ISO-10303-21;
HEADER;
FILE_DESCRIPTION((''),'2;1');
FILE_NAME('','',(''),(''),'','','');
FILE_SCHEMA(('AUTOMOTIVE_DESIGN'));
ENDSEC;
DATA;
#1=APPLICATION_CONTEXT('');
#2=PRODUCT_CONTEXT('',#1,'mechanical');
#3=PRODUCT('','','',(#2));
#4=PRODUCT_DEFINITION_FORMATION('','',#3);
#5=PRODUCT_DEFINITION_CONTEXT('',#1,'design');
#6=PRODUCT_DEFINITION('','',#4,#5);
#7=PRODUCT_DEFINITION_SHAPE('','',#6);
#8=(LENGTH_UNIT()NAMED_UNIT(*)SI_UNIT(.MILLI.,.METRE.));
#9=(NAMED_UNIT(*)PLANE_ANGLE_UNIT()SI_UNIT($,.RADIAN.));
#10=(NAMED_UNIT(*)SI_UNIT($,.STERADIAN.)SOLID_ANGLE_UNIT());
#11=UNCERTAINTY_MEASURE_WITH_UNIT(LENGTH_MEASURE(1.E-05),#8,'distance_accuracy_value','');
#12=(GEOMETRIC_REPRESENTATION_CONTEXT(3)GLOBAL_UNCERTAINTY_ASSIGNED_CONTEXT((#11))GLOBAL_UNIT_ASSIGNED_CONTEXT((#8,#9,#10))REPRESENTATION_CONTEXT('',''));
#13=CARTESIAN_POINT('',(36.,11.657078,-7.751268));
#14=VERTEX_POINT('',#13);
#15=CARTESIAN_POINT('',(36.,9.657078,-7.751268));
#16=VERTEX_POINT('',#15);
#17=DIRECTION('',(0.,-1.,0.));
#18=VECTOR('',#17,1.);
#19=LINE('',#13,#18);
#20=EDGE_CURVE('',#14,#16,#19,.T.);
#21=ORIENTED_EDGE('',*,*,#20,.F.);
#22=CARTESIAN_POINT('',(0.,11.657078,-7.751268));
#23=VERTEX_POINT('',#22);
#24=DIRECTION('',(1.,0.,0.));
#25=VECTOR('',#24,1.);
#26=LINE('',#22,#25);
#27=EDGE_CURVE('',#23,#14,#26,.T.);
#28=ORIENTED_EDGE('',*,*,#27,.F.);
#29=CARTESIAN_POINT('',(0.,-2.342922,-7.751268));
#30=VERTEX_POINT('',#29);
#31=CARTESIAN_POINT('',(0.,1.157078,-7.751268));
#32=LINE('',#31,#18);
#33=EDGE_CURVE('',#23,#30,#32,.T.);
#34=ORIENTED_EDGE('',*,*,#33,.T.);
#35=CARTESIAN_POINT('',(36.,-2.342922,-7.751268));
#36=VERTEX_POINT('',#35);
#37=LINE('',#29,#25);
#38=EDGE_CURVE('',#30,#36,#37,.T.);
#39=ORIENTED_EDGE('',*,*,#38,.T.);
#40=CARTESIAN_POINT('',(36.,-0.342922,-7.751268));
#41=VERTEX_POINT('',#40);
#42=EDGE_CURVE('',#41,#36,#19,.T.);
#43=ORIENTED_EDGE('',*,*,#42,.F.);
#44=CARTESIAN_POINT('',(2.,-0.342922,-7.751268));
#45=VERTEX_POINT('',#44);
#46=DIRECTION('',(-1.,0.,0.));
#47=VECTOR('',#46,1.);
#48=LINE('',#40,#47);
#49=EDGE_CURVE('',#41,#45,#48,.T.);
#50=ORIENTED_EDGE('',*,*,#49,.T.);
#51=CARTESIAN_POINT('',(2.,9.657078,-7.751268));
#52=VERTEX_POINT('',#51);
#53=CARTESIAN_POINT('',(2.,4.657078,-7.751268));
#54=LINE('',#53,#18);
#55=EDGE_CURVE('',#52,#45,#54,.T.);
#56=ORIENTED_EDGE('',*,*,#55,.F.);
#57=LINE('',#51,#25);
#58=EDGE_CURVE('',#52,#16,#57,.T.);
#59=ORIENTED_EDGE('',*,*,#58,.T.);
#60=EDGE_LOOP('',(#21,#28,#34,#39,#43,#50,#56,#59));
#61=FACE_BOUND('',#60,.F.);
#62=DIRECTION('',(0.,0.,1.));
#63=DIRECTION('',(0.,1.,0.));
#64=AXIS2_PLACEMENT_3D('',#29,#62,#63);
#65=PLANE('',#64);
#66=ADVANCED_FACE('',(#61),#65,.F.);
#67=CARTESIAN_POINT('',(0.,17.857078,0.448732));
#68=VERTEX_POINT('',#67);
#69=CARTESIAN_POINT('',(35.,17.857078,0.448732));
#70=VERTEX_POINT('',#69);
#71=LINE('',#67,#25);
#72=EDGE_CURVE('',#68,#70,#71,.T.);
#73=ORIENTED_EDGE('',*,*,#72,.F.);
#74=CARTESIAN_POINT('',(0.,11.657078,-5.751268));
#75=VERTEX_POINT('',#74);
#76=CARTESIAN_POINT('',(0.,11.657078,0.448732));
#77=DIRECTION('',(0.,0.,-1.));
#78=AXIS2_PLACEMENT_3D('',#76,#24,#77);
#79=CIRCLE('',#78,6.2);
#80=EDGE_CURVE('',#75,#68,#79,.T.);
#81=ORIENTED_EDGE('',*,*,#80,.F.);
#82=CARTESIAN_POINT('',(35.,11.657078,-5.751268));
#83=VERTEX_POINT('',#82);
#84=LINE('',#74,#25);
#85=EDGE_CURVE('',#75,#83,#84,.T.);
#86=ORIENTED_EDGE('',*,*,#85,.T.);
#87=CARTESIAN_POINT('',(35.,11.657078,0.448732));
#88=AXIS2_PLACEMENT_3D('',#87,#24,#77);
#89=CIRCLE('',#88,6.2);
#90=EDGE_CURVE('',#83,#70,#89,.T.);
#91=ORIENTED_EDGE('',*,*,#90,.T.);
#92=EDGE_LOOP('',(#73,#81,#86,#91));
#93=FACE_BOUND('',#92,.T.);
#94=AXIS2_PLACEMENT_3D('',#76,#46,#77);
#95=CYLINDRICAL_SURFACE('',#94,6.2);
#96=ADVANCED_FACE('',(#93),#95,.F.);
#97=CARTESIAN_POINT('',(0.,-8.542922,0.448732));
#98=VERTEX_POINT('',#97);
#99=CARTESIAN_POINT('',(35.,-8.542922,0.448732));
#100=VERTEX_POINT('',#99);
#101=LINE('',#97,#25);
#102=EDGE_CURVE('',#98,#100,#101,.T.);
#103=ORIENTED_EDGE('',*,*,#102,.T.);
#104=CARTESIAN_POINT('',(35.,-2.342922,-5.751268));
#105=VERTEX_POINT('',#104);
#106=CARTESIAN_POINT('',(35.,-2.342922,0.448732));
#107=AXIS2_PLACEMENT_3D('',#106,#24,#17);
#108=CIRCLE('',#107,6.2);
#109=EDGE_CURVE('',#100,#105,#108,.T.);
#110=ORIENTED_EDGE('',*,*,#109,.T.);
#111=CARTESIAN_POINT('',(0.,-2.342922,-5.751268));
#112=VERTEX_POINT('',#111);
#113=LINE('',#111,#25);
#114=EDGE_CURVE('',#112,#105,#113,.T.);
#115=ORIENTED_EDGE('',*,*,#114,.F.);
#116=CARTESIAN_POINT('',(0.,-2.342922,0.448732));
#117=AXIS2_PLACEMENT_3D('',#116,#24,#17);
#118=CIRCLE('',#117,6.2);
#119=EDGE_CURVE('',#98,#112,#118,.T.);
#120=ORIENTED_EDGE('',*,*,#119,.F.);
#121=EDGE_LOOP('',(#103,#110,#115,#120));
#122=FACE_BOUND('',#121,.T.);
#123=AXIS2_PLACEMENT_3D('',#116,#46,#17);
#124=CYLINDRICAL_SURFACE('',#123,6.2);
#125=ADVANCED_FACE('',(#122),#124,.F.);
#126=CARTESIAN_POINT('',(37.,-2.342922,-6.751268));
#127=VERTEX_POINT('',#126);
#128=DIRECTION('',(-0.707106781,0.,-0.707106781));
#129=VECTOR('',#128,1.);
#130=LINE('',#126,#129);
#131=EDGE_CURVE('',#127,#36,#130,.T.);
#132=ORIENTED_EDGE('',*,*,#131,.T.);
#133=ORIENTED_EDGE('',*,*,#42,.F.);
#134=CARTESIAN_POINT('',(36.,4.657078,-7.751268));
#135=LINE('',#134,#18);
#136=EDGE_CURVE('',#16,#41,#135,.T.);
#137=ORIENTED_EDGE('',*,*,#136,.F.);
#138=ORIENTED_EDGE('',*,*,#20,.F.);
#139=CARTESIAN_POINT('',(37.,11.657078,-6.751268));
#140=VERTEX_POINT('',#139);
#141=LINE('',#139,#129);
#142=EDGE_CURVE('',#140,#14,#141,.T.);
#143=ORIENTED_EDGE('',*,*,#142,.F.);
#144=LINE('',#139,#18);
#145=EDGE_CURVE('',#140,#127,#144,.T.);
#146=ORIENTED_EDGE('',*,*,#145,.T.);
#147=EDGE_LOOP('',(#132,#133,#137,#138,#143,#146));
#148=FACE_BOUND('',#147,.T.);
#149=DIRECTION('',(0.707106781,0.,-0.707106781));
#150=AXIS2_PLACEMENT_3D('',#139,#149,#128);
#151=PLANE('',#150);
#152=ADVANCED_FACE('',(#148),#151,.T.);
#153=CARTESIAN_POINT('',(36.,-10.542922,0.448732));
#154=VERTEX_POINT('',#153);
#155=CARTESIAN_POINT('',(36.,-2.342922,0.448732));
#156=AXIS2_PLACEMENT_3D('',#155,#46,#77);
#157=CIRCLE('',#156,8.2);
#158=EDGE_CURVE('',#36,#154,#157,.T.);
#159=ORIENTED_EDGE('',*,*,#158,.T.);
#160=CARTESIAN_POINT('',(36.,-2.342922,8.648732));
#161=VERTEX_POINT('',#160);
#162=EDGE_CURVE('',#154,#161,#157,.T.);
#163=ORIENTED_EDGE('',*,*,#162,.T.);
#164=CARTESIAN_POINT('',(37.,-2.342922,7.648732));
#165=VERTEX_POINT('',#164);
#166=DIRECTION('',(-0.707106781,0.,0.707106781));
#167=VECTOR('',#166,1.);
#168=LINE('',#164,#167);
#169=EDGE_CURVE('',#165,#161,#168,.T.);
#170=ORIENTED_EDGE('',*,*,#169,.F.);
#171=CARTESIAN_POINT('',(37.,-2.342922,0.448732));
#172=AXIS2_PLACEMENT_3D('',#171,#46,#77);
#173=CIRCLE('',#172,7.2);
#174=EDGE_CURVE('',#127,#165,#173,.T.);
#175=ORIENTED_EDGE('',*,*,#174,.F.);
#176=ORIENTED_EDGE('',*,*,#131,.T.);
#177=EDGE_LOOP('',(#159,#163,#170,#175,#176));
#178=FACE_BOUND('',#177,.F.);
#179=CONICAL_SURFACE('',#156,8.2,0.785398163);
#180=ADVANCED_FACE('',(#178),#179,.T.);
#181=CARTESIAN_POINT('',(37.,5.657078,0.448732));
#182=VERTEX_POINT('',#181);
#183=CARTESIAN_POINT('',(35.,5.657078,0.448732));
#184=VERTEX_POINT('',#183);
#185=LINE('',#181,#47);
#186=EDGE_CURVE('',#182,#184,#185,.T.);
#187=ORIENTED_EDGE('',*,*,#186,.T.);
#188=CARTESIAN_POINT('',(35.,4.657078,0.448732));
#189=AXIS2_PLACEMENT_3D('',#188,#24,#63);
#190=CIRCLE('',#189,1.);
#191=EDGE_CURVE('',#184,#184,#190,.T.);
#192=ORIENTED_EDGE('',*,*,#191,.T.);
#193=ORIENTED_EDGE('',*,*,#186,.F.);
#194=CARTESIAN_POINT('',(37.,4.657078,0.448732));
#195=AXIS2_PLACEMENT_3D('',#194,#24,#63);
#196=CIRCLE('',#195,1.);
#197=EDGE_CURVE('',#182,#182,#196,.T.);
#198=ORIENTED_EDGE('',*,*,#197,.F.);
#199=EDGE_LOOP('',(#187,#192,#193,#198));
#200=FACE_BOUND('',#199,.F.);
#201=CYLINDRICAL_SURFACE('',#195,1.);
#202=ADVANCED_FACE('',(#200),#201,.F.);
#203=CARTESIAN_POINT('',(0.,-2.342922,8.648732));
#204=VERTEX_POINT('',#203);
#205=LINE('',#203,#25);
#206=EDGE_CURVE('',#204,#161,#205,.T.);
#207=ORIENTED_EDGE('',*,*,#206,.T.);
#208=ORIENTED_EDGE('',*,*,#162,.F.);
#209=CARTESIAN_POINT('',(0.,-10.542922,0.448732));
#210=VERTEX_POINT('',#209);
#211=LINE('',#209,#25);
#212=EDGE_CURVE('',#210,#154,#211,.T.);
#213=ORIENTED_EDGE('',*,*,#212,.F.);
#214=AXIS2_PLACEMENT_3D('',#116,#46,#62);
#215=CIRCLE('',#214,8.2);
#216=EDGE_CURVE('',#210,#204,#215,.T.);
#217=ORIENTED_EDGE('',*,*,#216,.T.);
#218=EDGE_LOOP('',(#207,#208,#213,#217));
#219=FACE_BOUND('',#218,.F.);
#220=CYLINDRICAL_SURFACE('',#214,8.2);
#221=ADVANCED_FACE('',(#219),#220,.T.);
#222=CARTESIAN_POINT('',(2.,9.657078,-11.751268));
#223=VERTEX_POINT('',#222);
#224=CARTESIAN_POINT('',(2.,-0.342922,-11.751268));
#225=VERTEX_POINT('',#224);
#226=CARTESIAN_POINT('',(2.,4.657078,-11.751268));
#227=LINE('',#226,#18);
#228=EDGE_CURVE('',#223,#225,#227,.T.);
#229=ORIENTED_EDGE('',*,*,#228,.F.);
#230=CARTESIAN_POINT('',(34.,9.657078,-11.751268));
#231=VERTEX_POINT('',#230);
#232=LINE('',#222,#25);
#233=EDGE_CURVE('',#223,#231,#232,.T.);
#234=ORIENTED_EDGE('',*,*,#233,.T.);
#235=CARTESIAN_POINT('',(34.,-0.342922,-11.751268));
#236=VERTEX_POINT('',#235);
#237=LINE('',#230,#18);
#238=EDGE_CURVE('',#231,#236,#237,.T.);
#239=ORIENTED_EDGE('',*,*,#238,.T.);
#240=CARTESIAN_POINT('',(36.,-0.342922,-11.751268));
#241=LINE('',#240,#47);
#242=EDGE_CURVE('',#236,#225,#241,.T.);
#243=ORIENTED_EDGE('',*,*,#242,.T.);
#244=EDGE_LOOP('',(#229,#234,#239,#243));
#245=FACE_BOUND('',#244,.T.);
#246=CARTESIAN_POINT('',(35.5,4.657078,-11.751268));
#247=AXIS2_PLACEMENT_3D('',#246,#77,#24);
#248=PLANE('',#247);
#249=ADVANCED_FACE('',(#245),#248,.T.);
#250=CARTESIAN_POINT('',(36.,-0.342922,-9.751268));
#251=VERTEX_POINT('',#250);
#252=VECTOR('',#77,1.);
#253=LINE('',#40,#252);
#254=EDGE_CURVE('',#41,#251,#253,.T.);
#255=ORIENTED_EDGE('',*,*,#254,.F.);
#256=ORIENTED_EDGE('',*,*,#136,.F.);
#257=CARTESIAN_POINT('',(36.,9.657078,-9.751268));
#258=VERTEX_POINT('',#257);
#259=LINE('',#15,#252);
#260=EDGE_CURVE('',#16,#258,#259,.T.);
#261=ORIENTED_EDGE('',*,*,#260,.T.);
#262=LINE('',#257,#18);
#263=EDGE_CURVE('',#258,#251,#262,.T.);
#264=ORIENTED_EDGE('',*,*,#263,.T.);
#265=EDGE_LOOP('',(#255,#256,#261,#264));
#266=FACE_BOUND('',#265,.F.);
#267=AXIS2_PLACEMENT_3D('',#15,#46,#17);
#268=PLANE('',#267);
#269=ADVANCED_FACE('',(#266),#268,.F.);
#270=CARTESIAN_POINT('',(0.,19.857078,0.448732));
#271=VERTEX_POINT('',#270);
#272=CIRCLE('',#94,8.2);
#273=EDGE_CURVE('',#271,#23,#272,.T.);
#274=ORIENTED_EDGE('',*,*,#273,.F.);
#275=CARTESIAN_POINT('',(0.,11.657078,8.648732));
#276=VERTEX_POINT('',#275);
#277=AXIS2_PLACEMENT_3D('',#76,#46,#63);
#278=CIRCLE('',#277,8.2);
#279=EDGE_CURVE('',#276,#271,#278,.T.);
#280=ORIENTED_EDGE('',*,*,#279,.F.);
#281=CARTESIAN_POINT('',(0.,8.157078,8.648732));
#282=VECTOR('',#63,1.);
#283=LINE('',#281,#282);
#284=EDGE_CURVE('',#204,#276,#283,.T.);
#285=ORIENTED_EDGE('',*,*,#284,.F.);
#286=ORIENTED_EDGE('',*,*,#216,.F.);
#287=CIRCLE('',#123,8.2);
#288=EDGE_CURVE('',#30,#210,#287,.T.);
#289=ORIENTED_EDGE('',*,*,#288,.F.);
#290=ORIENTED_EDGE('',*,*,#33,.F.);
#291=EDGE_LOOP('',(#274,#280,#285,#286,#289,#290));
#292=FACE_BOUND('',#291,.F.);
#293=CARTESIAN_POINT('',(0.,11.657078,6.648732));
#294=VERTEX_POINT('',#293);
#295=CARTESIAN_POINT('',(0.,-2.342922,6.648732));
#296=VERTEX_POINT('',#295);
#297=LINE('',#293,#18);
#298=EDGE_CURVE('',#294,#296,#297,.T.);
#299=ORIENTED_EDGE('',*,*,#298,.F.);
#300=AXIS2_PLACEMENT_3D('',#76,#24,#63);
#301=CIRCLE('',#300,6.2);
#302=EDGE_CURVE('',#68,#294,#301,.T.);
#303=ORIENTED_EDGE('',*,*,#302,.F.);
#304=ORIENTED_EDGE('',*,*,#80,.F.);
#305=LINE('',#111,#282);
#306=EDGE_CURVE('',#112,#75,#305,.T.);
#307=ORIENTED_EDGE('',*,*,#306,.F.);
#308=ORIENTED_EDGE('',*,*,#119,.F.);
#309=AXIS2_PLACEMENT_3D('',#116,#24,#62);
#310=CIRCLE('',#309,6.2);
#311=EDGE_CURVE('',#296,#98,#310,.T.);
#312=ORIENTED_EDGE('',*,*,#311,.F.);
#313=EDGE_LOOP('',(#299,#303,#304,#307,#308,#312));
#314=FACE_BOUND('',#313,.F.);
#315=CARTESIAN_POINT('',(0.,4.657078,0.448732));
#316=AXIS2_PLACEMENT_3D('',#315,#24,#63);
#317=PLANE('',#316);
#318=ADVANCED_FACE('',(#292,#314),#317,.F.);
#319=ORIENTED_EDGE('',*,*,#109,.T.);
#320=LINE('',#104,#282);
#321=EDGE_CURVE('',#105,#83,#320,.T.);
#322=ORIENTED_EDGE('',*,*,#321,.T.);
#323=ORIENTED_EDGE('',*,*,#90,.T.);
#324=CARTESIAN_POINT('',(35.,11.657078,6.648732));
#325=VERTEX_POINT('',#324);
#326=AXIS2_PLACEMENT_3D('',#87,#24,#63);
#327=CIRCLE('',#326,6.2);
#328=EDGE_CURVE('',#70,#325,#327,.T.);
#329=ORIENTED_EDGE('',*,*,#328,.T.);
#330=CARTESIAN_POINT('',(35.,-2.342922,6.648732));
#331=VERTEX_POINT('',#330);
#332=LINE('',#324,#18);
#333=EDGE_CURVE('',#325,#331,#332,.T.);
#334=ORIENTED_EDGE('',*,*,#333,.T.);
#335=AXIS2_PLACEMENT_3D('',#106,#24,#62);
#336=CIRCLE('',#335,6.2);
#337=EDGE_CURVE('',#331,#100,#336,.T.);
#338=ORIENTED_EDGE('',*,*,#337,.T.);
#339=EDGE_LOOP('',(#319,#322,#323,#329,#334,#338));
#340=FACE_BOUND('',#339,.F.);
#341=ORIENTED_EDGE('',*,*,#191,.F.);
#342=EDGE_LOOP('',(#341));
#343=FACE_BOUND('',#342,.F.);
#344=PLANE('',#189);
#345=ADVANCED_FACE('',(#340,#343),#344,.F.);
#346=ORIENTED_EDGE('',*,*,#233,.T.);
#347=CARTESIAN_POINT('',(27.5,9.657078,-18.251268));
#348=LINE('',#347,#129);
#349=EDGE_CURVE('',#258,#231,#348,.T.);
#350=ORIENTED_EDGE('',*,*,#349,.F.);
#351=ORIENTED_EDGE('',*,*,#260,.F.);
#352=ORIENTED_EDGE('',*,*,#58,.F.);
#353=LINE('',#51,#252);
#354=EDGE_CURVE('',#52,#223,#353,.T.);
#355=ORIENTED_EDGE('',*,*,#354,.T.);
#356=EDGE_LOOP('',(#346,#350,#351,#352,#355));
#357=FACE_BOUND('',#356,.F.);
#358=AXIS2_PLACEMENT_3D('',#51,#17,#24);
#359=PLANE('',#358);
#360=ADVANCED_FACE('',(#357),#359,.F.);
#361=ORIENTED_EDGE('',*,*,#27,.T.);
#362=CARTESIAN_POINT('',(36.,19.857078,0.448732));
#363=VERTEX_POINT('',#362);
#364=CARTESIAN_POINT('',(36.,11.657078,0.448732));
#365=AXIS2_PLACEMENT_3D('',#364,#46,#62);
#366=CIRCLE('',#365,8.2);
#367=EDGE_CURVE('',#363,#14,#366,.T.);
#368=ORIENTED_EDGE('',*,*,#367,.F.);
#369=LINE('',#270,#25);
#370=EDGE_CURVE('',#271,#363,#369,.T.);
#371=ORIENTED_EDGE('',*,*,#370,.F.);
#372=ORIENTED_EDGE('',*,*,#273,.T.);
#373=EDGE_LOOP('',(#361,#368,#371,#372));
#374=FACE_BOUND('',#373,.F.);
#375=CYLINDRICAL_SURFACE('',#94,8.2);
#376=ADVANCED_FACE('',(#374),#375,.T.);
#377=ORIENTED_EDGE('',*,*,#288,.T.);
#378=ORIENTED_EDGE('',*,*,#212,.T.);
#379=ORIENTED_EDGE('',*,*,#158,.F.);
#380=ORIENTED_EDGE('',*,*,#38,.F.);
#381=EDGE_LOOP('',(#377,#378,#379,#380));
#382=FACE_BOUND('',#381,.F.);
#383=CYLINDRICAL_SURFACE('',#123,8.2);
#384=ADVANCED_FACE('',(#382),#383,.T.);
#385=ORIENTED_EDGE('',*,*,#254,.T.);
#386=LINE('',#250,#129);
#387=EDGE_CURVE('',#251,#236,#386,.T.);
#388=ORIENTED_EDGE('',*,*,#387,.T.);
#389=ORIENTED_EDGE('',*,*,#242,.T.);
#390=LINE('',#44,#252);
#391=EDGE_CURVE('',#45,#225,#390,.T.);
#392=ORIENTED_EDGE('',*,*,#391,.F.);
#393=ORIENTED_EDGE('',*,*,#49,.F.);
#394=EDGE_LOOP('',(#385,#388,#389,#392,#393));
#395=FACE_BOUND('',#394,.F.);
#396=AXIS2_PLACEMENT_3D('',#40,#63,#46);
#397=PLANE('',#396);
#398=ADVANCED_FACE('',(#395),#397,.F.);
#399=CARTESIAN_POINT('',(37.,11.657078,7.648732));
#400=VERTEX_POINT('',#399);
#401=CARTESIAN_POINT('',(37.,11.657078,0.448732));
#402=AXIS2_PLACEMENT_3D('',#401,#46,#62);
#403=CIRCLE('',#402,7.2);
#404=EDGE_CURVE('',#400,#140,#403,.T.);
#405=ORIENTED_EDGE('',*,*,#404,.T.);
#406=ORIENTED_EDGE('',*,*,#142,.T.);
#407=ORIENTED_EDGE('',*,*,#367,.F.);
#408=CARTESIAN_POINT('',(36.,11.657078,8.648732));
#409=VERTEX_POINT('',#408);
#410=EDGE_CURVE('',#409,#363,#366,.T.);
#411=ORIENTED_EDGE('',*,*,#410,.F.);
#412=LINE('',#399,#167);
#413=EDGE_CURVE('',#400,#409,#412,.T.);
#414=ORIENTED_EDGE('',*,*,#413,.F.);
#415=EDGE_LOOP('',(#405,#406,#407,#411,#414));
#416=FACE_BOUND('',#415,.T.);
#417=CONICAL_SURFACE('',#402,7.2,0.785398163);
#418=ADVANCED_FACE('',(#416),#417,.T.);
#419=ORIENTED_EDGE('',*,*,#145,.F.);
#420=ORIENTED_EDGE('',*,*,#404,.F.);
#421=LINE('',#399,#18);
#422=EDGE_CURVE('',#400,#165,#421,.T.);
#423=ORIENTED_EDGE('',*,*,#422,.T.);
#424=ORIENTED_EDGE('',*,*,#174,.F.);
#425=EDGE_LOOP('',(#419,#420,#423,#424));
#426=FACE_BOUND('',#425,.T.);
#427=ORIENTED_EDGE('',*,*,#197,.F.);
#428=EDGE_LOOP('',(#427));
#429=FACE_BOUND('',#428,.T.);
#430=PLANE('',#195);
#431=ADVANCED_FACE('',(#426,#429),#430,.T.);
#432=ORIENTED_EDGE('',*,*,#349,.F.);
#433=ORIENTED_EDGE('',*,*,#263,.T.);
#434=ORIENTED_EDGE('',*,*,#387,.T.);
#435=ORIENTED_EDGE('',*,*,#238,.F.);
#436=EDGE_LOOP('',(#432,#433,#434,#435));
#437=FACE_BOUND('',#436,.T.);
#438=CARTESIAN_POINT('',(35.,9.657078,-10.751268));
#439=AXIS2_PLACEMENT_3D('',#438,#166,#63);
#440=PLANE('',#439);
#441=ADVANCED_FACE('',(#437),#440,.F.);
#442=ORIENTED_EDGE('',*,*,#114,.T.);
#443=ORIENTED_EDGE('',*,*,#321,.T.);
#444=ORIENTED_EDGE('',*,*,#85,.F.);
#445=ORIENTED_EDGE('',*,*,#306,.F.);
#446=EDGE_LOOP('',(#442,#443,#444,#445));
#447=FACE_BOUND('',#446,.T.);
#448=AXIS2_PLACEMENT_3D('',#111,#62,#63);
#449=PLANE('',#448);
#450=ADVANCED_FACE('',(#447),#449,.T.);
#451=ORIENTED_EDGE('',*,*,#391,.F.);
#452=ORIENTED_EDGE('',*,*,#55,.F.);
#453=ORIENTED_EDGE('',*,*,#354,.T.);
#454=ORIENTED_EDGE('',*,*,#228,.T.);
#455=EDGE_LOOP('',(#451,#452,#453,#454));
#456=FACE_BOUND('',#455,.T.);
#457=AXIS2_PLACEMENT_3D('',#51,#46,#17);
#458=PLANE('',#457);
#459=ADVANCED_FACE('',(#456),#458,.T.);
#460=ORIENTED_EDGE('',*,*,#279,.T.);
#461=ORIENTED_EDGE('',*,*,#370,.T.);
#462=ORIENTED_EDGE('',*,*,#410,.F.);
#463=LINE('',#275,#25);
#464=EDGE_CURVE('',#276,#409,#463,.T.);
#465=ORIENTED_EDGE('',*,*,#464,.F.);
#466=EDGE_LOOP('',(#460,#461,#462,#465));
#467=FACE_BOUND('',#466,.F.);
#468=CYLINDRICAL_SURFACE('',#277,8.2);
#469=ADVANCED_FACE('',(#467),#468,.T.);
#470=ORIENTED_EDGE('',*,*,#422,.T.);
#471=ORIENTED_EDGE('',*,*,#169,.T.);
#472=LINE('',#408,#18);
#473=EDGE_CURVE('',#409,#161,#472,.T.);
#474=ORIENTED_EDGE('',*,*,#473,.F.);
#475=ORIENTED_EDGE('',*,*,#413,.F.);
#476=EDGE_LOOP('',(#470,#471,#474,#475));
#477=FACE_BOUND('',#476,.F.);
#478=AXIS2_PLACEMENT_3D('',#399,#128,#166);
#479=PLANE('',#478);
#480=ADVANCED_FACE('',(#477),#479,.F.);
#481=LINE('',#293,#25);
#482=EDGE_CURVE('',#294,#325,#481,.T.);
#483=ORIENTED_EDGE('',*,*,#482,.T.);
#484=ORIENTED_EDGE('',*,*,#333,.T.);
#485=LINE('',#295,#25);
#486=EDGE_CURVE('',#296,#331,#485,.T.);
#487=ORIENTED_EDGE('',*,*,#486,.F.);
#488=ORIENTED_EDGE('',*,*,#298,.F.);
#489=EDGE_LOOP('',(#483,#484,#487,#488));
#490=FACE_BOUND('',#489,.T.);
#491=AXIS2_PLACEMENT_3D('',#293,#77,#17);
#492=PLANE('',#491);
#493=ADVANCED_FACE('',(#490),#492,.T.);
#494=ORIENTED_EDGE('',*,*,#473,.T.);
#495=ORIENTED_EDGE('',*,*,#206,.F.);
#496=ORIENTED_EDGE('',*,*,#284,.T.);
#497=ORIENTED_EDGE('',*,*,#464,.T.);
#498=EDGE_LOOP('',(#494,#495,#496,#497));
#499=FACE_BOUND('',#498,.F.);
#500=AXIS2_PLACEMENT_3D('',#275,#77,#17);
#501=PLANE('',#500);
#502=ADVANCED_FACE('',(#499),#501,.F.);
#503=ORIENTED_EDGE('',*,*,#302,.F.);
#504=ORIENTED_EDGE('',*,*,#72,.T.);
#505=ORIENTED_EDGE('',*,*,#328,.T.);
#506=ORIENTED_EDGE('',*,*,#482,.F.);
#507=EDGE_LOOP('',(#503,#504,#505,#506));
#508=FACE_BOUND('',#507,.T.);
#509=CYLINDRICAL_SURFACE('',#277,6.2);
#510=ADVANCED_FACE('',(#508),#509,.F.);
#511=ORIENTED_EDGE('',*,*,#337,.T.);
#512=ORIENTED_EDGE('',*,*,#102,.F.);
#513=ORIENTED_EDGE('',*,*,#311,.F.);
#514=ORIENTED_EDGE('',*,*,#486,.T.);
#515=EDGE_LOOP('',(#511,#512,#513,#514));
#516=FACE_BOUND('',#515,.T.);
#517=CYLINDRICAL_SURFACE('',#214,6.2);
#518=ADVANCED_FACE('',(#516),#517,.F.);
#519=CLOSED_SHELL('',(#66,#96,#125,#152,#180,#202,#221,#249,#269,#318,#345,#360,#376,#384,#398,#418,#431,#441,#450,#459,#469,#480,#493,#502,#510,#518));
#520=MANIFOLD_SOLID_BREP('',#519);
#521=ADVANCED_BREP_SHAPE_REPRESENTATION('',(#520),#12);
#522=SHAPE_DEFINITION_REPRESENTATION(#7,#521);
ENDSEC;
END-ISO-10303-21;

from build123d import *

# Parameters (mm, degrees)
F1_DEPTH    = 35
F2_T        = 2
F3_T1_DEPTH = 14
F3_T4_ANGLE = 180
F3_T6_ANGLE = 180
F4_R        = 1
F5_DEPTH    = 3
F6_W        = 1
F6_H        = 10
F6_W_2      = 33
F7_DEPTH    = 4
F8_SIZE     = 2


# Not quite as in the source:
# - a fillet or chamfer that OpenCascade refuses, or shapes differently, is made with other operations: its cross-section is extruded or revolved along the edge and cut away or added


with BuildPart() as f1:
    # F0 (on Right) → F1 (new body)
    with BuildSketch(Plane.YZ):
        with BuildLine():
            ThreePointArc((-8.5429217076, 0.448732347), (-6.726983751, -3.9353296963), (-2.3429217076, -5.751267653))
            Line((-2.3429217076, -5.751267653), (11.6570782924, -5.751267653))
            ThreePointArc((11.6570782924, -5.751267653), (16.0411403357, -3.9353296963), (17.8570782924, 0.448732347))
            ThreePointArc((17.8570782924, 0.448732347), (16.0411403357, 4.8327943904), (11.6570782924, 6.648732347))
            Line((11.6570782924, 6.648732347), (-2.3429217076, 6.648732347))
            ThreePointArc((-2.3429217076, 6.648732347), (-6.726983751, 4.8327943904), (-8.5429217076, 0.448732347))
        make_face()
    extrude(amount=F1_DEPTH)

    # F2
    f2_openings = [f1.faces().sort_by_distance(p)[0] for p in [
        (0, 4.657078, 0.448732),
    ]]
    offset(amount=F2_T, openings=f2_openings, kind=Kind.INTERSECTION)

    # F3: chamfer of 1 on 4 edges, made by hand

    # F3_s2 → F3_t1 (cut)
    with BuildSketch(Plane.XZ.offset(-11.6570782924)):
        Polygon((37, -6.751267653), (36, -7.751267653), (37, -7.751267653), align=None)
        Polygon((37, 7.648732347), (36, 8.648732347), (37, 8.648732347), align=None)
    extrude(amount=F3_T1_DEPTH, mode=Mode.SUBTRACT)

    # F3_s3 → F3_t4 (revolve, cut)
    with BuildSketch(Plane.XZ.offset(2.3429217076)):
        Polygon((36, -7.751267653), (37, -6.751267653), (37, -7.751267653), align=None)
    revolve(axis=Axis((37, -2.3429217076, 0.448732347), (-1, 0, 0)), revolution_arc=F3_T4_ANGLE, mode=Mode.SUBTRACT)

    # F3_s5 → F3_t6 (revolve, cut)
    with BuildSketch(Plane.XZ.offset(-11.6570782924)):
        Polygon((37, 7.648732347), (36, 8.648732347), (37, 8.648732347), align=None)
    revolve(axis=Axis((37, 11.6570782924, 0.448732347), (-1, 0, 0)), revolution_arc=F3_T6_ANGLE, mode=Mode.SUBTRACT)

    # F4 (on face) → F5 (cut)
    with BuildSketch(Plane.YZ.offset(37)):
        with Locations((4.6570782924, 0.448732347)):
            Circle(F4_R)
    extrude(amount=-F5_DEPTH, mode=Mode.SUBTRACT)

    # F6 (on face) → F7 (join)
    with BuildSketch(Plane(origin=(0, 0, -7.751267653), x_dir=(1, 0, 0), z_dir=(0, 0, -1))):
        with Locations((35.5, -4.6570782924)):
            Rectangle(F6_W, F6_H)
        with Locations((18.5, -4.6570782924)):
            Rectangle(F6_W_2, F6_H)
    extrude(amount=F7_DEPTH)

    # F8
    f8_edges = [f1.edges().sort_by_distance(p)[0] for p in [
        (36, 4.657078, -11.751268),
    ]]
    chamfer(f8_edges, length=F8_SIZE)


solid = f1.part
